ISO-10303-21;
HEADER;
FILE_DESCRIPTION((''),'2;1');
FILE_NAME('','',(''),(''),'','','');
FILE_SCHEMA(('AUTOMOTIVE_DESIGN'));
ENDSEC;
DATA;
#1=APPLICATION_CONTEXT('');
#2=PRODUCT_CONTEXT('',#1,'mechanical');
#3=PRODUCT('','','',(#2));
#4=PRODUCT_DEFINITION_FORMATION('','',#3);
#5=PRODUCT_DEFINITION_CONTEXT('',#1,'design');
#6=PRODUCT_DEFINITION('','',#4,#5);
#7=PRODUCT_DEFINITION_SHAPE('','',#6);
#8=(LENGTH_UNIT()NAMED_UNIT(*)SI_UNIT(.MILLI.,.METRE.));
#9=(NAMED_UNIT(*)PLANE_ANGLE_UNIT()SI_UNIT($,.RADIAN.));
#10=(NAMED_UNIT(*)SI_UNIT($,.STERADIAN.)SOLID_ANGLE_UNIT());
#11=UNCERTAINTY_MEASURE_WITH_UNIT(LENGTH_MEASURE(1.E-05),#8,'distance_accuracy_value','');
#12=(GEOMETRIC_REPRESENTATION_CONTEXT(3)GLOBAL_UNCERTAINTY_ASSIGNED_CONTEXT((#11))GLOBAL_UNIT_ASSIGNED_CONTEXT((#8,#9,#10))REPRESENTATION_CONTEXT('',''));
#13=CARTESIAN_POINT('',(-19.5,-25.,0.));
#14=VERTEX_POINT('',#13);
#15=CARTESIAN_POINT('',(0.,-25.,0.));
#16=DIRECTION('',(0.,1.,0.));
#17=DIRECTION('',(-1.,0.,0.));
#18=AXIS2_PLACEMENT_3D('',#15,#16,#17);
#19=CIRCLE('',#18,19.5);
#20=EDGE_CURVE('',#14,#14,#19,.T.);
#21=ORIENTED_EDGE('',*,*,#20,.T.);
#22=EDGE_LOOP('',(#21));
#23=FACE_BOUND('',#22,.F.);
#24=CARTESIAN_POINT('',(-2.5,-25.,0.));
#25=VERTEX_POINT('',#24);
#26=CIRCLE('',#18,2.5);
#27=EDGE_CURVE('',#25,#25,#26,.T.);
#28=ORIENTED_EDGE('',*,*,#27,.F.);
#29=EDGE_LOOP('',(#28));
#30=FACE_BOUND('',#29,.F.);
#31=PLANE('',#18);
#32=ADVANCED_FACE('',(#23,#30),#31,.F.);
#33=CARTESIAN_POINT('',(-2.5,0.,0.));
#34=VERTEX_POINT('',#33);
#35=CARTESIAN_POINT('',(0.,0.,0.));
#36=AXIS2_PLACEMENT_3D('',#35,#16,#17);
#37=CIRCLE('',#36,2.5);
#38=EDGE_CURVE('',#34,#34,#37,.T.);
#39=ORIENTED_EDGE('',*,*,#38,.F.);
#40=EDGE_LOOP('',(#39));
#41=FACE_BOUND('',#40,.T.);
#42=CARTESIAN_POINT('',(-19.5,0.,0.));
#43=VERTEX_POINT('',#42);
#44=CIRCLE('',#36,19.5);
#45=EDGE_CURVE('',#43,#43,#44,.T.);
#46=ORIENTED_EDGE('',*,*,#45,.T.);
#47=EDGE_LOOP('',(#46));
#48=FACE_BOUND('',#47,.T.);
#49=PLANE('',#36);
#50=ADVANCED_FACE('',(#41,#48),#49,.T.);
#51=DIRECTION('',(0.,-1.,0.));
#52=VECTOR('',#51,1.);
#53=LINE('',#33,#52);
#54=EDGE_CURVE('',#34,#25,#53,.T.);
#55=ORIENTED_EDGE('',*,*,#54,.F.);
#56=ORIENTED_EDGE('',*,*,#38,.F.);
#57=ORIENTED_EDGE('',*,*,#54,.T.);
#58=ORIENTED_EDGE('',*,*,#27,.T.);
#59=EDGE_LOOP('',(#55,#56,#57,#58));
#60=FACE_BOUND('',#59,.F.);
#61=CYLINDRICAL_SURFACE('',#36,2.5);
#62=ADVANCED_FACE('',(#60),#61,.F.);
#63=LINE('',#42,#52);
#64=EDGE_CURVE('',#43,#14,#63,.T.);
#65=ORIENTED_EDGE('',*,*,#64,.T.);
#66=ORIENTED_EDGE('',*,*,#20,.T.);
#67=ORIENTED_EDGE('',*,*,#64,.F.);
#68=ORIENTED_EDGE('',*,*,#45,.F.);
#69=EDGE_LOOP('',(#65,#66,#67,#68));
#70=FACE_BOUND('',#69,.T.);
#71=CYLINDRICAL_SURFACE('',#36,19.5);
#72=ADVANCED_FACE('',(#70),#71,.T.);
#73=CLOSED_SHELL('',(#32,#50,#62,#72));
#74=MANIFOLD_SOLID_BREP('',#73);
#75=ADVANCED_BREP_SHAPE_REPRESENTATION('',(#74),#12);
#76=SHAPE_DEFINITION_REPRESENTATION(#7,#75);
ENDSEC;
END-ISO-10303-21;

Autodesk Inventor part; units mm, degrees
ref_plane "YZ Plane" through (0, 0, 0) normal (1, 0, 0) x (0, 1, 0)
ref_plane "XZ Plane" through (0, 0, 0) normal (0, 1, 0) x (-1, 0, 0)
ref_plane "XY Plane" through (0, 0, 0) normal (0, 0, 1) x (1, 0, 0)
sketch "Sketch1" plane through (0, 0, 0) normal (0, 1, 0) x (-1, 0, 0)
  circle A0 centre (0, 0) radius 17.5
  circle A1 centre (0, 0) radius 2.5
  dimension "d0" = 35
  dimension "d1" = 5
extrude "Extrusion1" add sketch "Sketch1" against normal blind 25
thicken "Thicken1" operation add thickness 1 both sides no extend neighbours yes toward (-0.9967573, 0, -0.0804666) faces at (-17.4433, -16.6667, -1.4082)
thicken "Thicken2" operation add thickness 1 both sides no extend neighbours yes toward (-0.9967573, 0, -0.0804666) faces at (-18.44, -16.6667, -1.4886)
properties part number "roller2 grp17"
